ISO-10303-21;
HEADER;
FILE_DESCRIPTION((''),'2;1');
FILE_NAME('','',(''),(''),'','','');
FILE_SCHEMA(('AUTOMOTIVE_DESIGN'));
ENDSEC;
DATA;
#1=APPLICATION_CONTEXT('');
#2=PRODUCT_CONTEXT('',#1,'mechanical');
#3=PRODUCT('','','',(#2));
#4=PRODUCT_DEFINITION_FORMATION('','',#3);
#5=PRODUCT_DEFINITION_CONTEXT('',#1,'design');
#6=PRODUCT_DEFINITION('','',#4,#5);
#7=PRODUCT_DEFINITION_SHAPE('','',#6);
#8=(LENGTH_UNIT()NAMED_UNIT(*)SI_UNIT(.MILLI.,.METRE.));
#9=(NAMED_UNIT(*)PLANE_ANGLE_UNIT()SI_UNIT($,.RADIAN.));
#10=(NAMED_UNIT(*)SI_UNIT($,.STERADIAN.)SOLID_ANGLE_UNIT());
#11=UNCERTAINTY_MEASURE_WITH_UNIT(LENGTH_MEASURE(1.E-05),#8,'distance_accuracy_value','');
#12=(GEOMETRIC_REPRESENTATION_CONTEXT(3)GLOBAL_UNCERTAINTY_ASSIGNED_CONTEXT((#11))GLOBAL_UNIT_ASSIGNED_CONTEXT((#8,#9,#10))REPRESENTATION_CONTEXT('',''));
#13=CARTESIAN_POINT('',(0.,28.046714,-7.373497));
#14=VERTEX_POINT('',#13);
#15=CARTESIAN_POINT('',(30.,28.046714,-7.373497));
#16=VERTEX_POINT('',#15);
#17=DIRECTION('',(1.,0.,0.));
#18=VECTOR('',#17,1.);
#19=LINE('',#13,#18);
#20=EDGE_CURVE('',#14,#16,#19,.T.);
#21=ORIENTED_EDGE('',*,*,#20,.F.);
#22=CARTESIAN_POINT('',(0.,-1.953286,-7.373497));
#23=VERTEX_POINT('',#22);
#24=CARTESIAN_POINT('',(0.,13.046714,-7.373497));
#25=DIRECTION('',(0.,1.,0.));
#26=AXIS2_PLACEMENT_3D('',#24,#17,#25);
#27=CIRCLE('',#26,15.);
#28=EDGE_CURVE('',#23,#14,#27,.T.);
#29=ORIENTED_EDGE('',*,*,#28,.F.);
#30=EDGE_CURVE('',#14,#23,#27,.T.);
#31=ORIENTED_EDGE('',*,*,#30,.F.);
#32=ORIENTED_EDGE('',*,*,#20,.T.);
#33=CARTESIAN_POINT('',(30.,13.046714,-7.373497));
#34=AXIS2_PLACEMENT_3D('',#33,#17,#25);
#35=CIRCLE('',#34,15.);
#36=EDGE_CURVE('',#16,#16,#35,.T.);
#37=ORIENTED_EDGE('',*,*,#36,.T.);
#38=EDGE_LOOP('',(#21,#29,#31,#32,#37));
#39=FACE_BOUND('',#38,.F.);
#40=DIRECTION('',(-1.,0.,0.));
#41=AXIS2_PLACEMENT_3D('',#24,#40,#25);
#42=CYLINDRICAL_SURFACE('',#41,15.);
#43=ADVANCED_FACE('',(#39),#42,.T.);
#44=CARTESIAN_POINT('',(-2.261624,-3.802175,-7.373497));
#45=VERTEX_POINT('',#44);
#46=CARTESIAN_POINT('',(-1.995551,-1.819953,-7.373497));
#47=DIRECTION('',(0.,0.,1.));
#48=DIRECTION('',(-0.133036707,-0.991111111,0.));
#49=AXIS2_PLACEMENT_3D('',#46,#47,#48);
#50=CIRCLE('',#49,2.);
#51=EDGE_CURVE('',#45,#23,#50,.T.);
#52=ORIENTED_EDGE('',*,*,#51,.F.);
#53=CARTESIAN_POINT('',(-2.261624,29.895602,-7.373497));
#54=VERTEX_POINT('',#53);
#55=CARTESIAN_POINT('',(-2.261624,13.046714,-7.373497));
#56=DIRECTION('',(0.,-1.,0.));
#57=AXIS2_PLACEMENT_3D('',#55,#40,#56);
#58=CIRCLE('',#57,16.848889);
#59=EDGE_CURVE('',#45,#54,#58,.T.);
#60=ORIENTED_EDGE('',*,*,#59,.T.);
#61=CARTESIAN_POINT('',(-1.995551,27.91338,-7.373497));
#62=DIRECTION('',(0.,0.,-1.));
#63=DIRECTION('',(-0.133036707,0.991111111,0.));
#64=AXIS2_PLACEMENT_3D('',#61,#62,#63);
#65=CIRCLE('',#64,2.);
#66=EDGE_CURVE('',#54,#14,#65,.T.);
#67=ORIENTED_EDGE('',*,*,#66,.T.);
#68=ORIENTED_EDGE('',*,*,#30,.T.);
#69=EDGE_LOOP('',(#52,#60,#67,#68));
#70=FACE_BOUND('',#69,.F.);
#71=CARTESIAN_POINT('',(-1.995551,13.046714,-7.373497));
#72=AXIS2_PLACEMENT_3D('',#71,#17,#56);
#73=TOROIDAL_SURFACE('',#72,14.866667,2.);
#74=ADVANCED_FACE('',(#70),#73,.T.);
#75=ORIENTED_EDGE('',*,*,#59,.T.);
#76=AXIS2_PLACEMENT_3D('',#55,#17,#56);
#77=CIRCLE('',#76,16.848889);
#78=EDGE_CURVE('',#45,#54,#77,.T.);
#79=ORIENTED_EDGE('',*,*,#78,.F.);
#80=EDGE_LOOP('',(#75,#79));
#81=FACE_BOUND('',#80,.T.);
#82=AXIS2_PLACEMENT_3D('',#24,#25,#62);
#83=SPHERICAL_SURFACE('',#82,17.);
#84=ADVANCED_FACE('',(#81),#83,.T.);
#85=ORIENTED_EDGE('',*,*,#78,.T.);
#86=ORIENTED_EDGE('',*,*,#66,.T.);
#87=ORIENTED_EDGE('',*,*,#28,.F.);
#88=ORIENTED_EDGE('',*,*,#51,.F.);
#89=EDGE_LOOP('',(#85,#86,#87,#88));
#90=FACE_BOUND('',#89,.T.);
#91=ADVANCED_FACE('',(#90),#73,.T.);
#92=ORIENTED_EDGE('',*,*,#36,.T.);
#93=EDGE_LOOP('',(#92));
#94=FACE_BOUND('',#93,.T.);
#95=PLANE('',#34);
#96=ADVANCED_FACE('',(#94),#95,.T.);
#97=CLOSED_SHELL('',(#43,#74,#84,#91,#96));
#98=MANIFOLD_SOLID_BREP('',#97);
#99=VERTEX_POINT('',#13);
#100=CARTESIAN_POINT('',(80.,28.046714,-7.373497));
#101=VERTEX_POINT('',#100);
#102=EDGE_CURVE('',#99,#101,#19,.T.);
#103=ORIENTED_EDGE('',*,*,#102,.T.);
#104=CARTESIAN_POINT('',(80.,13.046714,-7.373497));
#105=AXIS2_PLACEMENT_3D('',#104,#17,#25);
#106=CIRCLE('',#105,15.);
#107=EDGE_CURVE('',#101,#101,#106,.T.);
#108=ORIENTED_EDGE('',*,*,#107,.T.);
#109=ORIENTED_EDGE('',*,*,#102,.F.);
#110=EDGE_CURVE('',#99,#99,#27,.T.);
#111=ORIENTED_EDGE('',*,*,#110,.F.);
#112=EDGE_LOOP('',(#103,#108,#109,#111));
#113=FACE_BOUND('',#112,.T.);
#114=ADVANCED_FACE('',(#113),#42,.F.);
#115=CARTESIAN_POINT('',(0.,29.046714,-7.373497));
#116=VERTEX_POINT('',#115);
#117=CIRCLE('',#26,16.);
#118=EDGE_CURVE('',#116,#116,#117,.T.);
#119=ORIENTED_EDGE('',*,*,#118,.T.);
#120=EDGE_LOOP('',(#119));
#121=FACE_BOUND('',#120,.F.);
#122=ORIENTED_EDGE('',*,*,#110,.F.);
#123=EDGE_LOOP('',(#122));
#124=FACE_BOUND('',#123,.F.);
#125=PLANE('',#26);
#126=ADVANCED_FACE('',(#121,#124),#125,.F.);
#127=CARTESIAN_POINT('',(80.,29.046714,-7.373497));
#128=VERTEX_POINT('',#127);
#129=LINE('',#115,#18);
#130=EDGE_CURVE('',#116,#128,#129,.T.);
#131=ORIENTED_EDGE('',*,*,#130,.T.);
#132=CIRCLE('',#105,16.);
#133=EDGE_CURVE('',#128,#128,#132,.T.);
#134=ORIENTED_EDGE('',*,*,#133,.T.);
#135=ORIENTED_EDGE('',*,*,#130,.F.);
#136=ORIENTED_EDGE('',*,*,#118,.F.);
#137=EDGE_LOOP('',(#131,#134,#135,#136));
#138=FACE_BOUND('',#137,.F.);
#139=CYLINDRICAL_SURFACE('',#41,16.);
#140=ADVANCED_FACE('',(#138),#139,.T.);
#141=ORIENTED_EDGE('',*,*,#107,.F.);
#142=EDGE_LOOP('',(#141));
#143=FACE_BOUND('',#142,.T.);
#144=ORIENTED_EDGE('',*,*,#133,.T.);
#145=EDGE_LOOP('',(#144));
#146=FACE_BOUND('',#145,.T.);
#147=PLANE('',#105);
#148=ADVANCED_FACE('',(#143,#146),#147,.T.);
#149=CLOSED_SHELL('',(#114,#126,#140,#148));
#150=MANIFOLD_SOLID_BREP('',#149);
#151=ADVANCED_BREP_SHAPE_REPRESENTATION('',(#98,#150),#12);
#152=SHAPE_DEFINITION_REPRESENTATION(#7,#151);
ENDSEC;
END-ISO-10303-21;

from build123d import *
from build123d import SkipClean  # not in build123d's __all__

# Parameters (mm, degrees)
F1_ANGLE    = 180
F2_R        = 15
F3_DEPTH    = 30
F4_R        = 16
F4_R_2      = 15
F5_DEPTH    = 80
F6_T2_ANGLE = 180
F6_T4_ANGLE = 180


# Not quite as in the source:
# - a fillet or chamfer that OpenCascade refuses, or shapes differently, is made with other operations: its cross-section is extruded or revolved along the edge and cut away or added


with BuildPart() as f1:
    # F0 (on Right) → F1 (revolve)
    with BuildSketch(Plane.YZ):
        with BuildLine():
            Line((30.0467135459, -7.373497352), (-3.9532864541, -7.373497352))
            ThreePointArc((-3.9532864541, -7.373497352), (13.0467135459, -24.373497352), (30.0467135459, -7.373497352))
        make_face()
    revolve(axis=Axis((0, 13.0467135459, -7.373497352), (0, 1, 0)), revolution_arc=F1_ANGLE)

    # F2 (on face) → F3 (join)
    with BuildSketch(Plane.YZ):
        with Locations((13.0467135459, -7.373497352)):
            Circle(F2_R)
    extrude(amount=F3_DEPTH)

    # F6: fillet of radius 2 on 1 edges, made by hand

    # F6_s1 → F6_t2 (revolve, cut)
    with BuildSketch(Plane.XY.offset(-7.373497352)):
        with BuildLine():
            ThreePointArc((-2.2616240205, -3.802175343), (-0.7297029178, -3.3683812365), (0, -1.9532864541))
            Line((0, -1.9532864541), (0.0399110121, -1.9559531207))
            ThreePointArc((0.0399110121, -1.9559531207), (0.04, -2.9532864541), (0.04, -3.9532864541))
            Line((0.04, -3.9532864541), (0, -3.9932864541))
            ThreePointArc((0, -3.9932864541), (-1.136, -3.9553776196), (-2.2669454887, -3.8418197874))
            Line((-2.2669454887, -3.8418197874), (-2.2616240205, -3.802175343))
        make_face()
    revolve(axis=Axis((0, 13.0467135459, -7.373497352), (1, 0, 0)), revolution_arc=F6_T2_ANGLE, mode=Mode.SUBTRACT)

    # F6_s3 → F6_t4 (revolve, cut)
    with BuildSketch(Plane.XY.offset(-7.373497352)):
        with BuildLine():
            ThreePointArc((-2.2616240205, -3.802175343), (-0.7297029178, -3.3683812365), (0, -1.9532864541))
            Line((0, -1.9532864541), (0.0399110121, -1.9559531207))
            ThreePointArc((0.0399110121, -1.9559531207), (0.04, -2.9532864541), (0.04, -3.9532864541))
            Line((0.04, -3.9532864541), (0, -3.9932864541))
            ThreePointArc((0, -3.9932864541), (-1.136, -3.9553776196), (-2.2669454887, -3.8418197874))
            Line((-2.2669454887, -3.8418197874), (-2.2616240205, -3.802175343))
        make_face()
    with SkipClean():  # cleaning this boolean's faces spoils the solid; the shape is the same uncleaned
        revolve(axis=Axis((0, 13.0467135459, -7.373497352), (-1, 0, 0)), revolution_arc=F6_T4_ANGLE, mode=Mode.SUBTRACT)


with BuildPart() as f5:
    # F4 (on face) → F5 (new body)
    with BuildSketch(Plane.YZ):
        with Locations((13.0467135459, -7.373497352)):
            Circle(F4_R)
        with Locations((13.0467135459, -7.373497352)):
            Circle(F4_R_2, mode=Mode.SUBTRACT)
    extrude(amount=F5_DEPTH)


solid = Compound([f1.part, f5.part])
